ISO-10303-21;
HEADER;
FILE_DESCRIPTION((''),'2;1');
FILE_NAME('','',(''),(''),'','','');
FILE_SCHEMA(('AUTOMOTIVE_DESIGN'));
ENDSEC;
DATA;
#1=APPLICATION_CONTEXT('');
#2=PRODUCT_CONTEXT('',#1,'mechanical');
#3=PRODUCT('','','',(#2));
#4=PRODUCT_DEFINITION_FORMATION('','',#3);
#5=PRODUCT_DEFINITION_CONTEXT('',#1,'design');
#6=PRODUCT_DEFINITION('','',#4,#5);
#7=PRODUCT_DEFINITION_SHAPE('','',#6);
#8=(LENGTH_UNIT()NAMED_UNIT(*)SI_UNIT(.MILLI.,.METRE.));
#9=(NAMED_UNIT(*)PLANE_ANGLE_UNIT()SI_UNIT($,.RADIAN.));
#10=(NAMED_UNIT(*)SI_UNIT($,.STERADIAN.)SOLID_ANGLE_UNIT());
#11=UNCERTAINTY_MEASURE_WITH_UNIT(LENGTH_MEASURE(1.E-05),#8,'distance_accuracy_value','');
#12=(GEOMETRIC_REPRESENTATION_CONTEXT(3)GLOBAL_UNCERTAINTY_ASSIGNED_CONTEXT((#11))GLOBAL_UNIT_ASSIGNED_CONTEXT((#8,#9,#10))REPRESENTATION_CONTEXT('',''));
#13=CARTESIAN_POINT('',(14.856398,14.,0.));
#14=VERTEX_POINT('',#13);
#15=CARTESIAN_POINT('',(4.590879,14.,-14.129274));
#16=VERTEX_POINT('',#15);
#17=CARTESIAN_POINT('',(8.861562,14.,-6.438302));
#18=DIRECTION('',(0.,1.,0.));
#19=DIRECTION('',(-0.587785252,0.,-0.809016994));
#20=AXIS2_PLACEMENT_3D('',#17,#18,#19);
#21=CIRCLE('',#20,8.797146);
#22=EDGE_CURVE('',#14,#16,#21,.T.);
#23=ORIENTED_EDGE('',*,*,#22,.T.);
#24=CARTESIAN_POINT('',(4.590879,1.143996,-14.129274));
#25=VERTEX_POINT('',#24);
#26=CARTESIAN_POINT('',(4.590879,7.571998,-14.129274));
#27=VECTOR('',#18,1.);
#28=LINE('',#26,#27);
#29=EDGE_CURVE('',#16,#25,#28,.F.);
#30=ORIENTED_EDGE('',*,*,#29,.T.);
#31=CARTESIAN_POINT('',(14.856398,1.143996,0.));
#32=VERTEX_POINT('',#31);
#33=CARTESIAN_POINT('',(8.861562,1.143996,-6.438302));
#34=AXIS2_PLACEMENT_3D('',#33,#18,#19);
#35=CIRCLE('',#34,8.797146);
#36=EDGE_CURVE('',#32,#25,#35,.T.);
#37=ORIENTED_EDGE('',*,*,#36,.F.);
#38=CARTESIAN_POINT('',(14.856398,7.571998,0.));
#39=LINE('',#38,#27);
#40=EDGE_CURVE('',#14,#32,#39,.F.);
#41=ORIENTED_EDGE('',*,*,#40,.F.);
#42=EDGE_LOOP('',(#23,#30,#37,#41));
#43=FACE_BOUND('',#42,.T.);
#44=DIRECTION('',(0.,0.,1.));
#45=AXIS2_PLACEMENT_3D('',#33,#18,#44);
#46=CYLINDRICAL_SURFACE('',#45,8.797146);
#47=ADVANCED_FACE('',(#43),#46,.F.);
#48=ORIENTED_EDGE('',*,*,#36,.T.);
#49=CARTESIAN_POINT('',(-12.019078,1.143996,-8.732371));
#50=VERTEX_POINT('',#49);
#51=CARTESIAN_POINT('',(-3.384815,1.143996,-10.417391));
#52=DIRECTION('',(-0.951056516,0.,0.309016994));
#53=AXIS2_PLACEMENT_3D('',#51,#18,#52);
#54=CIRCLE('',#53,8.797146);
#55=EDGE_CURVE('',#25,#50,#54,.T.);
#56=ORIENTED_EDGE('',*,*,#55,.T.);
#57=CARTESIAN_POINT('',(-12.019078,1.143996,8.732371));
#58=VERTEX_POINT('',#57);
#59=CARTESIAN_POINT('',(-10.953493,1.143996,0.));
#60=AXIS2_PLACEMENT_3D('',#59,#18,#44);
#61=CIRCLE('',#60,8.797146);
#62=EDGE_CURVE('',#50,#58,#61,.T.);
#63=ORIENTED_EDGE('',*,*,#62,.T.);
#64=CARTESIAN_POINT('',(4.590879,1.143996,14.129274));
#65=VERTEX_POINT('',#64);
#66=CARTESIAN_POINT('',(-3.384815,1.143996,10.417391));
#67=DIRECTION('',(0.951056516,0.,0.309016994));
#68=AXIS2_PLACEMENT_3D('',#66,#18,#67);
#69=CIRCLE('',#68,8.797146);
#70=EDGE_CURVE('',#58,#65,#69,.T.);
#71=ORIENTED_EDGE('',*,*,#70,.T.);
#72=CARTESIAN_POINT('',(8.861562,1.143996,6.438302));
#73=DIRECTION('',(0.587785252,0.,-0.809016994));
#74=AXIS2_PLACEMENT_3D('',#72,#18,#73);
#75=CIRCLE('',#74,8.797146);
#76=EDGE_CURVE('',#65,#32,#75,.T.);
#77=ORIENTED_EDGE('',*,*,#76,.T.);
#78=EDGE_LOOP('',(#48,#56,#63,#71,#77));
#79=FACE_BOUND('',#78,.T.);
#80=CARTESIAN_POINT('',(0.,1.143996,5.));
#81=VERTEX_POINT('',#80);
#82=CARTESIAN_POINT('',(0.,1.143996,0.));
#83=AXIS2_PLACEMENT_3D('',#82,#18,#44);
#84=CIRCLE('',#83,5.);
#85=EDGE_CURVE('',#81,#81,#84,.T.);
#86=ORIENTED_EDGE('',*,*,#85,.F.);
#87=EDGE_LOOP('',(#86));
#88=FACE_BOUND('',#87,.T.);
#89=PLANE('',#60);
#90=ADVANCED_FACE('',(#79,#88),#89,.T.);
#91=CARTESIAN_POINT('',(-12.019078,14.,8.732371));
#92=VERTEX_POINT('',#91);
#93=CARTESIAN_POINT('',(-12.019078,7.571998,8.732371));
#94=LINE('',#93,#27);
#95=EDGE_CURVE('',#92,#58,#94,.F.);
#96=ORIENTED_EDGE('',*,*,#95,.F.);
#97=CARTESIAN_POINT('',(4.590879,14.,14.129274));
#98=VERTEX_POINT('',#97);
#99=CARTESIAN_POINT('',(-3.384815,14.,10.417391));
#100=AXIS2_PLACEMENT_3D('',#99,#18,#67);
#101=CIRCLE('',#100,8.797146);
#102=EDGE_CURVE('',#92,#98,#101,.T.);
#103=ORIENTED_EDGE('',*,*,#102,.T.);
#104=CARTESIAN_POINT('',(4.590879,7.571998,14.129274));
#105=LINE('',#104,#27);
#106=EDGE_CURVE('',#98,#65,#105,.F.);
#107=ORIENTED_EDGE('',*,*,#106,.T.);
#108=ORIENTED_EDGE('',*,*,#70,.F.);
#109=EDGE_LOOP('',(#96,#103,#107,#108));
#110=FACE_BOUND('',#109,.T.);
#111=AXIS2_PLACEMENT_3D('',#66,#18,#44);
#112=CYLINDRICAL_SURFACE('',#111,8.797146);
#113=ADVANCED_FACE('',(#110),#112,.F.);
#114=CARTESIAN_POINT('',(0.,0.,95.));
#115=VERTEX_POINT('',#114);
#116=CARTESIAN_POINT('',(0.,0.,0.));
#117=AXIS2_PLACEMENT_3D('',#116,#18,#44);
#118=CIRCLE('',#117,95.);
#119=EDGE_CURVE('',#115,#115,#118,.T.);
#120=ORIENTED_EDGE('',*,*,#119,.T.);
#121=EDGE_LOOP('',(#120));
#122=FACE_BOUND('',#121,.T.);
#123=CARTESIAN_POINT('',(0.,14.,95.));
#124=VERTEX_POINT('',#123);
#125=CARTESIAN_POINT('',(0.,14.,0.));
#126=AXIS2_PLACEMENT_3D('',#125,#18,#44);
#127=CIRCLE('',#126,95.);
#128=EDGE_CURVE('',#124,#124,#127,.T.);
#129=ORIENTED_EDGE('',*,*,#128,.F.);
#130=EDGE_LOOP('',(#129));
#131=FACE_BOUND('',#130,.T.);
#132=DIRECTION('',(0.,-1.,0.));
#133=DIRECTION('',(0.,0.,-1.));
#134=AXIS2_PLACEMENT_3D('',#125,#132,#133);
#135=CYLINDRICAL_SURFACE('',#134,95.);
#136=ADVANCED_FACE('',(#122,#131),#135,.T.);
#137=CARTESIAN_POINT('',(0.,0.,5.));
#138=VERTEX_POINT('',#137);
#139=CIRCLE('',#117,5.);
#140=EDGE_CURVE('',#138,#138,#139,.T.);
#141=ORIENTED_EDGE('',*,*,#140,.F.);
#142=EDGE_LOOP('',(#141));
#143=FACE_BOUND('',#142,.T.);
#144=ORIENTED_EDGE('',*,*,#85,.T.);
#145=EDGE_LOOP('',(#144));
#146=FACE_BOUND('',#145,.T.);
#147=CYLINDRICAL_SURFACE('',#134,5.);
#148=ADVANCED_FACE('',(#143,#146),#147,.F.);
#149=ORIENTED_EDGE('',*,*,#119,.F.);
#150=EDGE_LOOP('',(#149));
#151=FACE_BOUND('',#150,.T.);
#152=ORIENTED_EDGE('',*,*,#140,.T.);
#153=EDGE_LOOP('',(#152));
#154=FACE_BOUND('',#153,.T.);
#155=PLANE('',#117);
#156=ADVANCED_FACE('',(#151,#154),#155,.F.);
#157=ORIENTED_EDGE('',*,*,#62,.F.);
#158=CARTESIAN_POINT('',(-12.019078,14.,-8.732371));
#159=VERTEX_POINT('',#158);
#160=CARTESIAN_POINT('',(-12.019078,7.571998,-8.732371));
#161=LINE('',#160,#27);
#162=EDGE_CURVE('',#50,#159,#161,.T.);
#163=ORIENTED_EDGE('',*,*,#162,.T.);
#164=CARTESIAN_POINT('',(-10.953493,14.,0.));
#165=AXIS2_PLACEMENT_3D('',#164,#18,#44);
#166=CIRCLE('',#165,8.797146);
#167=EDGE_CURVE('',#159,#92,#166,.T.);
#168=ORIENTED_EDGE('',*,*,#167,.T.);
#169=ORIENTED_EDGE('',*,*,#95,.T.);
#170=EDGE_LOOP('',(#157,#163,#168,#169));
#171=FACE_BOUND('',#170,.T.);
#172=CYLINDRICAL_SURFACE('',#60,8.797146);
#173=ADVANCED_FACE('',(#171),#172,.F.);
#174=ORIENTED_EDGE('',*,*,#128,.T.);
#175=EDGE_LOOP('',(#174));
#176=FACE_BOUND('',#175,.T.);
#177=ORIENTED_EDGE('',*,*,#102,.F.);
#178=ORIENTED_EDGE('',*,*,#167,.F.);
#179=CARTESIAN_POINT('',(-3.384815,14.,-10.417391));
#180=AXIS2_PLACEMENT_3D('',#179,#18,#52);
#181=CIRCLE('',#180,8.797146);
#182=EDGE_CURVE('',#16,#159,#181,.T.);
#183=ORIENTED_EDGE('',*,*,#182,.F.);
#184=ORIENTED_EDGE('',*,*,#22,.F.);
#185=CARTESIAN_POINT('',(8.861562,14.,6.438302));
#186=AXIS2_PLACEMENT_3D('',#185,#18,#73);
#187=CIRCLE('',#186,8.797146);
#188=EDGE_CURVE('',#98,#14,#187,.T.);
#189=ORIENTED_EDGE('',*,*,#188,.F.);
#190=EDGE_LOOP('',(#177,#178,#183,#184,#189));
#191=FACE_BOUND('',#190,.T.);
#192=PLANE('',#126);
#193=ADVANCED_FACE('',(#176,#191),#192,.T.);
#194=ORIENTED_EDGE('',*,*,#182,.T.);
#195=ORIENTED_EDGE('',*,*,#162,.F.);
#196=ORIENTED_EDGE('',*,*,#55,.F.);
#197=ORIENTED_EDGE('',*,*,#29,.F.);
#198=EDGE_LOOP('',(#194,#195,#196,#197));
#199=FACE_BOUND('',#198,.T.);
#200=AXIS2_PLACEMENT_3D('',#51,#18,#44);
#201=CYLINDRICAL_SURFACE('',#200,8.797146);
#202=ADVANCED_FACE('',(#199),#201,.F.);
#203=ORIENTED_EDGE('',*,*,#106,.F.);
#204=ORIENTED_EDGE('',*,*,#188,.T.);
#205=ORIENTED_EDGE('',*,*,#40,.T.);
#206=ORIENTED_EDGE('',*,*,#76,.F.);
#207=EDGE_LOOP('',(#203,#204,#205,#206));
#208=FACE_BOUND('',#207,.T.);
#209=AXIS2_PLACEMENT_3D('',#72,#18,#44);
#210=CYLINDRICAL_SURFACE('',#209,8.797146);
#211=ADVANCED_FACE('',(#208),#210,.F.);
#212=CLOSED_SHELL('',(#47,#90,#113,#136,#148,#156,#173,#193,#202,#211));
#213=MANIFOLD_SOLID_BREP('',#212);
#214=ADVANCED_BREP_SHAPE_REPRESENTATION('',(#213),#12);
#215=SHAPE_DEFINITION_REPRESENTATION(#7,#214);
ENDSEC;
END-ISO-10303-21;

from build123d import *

# Parameters (mm, degrees)
SKETCH1_R           = 95
BOSS_EXTRUDE1_DEPTH = 14
SKETCH2_R           = 5
CUT_EXTRUDE1_DEPTH  = 136.077755386
SKETCH3_R           = 8.797146217
CUT_EXTRUDE2_DEPTH  = 12.856004293
CIRPATTERN1_COUNT   = 5


with BuildPart() as part:
    # Sketch1 → Boss-Extrude1 (new body)
    with BuildSketch(Plane(origin=(0, 0, 0), x_dir=(1, 0, 0), z_dir=(0, 1, 0))):
        Circle(SKETCH1_R)
    extrude(amount=BOSS_EXTRUDE1_DEPTH)

    # Sketch2 → Cut-Extrude1 (cut, through all)
    with BuildSketch(Plane(origin=(0, 0, 0), x_dir=(1, 0, 0), z_dir=(0, 1, 0))):
        Circle(SKETCH2_R)
    extrude(amount=CUT_EXTRUDE1_DEPTH, mode=Mode.SUBTRACT)

    # Sketch3 → Cut-Extrude2 (cut)
    with BuildSketch(Plane(origin=(0, 14, 0), x_dir=(1, 0, 0), z_dir=(0, 1, 0))):
        with Locations((-10.953492751, 0)):
            Circle(SKETCH3_R)
    cut_extrude2 = extrude(amount=-CUT_EXTRUDE2_DEPTH, mode=Mode.SUBTRACT)

    # CirPattern1: Cut-Extrude2 ×5 about axis
    cirpattern1_axis = Axis((0, 0, 0), (0, 1, 0))
    for i in range(1, CIRPATTERN1_COUNT):
        add(cut_extrude2.rotate(cirpattern1_axis, i * 360 / CIRPATTERN1_COUNT), mode=Mode.SUBTRACT)


solid = part.part
